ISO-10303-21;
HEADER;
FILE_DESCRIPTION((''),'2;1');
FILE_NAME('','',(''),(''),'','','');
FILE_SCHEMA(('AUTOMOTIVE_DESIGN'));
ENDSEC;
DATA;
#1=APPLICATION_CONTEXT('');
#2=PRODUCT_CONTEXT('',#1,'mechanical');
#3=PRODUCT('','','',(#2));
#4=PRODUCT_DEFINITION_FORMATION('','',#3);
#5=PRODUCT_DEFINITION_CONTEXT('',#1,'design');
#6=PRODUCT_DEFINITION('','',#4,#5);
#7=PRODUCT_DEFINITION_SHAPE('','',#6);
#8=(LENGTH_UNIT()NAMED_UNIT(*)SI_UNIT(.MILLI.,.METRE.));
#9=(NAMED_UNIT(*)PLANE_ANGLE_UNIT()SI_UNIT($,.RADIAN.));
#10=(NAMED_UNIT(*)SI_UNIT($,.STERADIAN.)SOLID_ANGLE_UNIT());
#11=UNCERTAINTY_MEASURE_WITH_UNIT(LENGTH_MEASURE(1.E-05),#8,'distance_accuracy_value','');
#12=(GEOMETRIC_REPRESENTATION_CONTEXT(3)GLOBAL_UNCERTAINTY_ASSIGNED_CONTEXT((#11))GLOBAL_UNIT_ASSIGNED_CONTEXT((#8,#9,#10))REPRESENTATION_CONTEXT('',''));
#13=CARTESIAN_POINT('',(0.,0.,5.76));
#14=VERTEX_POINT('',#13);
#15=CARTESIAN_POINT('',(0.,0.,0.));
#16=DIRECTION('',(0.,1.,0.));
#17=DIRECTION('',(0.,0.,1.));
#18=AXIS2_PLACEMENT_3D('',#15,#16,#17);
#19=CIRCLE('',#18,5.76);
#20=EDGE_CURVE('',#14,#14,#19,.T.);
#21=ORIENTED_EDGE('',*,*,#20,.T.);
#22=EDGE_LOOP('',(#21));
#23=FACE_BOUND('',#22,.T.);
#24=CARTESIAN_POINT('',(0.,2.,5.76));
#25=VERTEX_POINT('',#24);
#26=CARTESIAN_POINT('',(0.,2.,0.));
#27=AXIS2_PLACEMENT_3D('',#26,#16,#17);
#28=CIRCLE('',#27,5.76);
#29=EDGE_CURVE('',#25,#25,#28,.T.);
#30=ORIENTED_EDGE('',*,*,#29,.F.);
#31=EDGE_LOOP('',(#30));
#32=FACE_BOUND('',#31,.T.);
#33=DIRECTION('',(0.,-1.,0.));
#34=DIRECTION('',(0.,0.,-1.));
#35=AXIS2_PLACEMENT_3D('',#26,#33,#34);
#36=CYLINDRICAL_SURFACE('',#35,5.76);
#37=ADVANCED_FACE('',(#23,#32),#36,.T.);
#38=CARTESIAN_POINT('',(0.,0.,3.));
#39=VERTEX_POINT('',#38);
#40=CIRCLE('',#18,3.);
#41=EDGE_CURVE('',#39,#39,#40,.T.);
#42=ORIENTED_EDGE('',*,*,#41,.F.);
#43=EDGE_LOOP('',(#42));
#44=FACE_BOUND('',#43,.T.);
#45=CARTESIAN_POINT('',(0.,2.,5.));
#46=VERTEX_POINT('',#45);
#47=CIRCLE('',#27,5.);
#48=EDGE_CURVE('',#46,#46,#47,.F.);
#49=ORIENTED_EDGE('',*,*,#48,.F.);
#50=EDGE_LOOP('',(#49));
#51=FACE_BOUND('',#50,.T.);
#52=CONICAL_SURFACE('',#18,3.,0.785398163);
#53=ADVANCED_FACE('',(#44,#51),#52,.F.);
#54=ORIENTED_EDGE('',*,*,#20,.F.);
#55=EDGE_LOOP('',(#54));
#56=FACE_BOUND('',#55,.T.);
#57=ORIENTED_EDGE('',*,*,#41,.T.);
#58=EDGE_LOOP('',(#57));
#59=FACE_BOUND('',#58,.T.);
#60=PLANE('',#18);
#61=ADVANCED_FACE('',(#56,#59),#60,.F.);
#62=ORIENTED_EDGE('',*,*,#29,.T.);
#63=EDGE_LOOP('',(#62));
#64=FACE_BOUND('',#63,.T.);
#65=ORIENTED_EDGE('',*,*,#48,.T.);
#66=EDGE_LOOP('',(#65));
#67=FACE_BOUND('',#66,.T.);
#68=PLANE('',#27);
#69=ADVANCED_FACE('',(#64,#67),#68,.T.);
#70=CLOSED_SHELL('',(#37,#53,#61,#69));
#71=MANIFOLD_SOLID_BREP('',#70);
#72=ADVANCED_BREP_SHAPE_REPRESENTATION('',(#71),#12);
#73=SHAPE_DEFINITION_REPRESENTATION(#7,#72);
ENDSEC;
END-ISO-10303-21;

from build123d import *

# Parameters (mm, degrees)
SKETCH1_R           = 5.76
SKETCH1_R_2         = 3
BOSS_EXTRUDE1_DEPTH = 2
CHAMFER1_SIZE       = 2


with BuildPart() as part:
    # Sketch1 → Boss-Extrude1 (new body)
    with BuildSketch(Plane(origin=(0, 0, 0), x_dir=(1, 0, 0), z_dir=(0, 1, 0))):
        with Locations(Location((0, 0, 0), (0, 0, 270))):
            Circle(SKETCH1_R)
        with Locations(Location((0, 0, 0), (0, 0, 270))):
            Circle(SKETCH1_R_2, mode=Mode.SUBTRACT)
    extrude(amount=BOSS_EXTRUDE1_DEPTH)

    # Chamfer1
    chamfer1_edges = [part.edges().sort_by_distance(p)[0] for p in [
        (0, 2, -3),
    ]]
    chamfer(chamfer1_edges, length=CHAMFER1_SIZE - 0.0001)  # a hair under: the kernel refuses the full size


solid = part.part
